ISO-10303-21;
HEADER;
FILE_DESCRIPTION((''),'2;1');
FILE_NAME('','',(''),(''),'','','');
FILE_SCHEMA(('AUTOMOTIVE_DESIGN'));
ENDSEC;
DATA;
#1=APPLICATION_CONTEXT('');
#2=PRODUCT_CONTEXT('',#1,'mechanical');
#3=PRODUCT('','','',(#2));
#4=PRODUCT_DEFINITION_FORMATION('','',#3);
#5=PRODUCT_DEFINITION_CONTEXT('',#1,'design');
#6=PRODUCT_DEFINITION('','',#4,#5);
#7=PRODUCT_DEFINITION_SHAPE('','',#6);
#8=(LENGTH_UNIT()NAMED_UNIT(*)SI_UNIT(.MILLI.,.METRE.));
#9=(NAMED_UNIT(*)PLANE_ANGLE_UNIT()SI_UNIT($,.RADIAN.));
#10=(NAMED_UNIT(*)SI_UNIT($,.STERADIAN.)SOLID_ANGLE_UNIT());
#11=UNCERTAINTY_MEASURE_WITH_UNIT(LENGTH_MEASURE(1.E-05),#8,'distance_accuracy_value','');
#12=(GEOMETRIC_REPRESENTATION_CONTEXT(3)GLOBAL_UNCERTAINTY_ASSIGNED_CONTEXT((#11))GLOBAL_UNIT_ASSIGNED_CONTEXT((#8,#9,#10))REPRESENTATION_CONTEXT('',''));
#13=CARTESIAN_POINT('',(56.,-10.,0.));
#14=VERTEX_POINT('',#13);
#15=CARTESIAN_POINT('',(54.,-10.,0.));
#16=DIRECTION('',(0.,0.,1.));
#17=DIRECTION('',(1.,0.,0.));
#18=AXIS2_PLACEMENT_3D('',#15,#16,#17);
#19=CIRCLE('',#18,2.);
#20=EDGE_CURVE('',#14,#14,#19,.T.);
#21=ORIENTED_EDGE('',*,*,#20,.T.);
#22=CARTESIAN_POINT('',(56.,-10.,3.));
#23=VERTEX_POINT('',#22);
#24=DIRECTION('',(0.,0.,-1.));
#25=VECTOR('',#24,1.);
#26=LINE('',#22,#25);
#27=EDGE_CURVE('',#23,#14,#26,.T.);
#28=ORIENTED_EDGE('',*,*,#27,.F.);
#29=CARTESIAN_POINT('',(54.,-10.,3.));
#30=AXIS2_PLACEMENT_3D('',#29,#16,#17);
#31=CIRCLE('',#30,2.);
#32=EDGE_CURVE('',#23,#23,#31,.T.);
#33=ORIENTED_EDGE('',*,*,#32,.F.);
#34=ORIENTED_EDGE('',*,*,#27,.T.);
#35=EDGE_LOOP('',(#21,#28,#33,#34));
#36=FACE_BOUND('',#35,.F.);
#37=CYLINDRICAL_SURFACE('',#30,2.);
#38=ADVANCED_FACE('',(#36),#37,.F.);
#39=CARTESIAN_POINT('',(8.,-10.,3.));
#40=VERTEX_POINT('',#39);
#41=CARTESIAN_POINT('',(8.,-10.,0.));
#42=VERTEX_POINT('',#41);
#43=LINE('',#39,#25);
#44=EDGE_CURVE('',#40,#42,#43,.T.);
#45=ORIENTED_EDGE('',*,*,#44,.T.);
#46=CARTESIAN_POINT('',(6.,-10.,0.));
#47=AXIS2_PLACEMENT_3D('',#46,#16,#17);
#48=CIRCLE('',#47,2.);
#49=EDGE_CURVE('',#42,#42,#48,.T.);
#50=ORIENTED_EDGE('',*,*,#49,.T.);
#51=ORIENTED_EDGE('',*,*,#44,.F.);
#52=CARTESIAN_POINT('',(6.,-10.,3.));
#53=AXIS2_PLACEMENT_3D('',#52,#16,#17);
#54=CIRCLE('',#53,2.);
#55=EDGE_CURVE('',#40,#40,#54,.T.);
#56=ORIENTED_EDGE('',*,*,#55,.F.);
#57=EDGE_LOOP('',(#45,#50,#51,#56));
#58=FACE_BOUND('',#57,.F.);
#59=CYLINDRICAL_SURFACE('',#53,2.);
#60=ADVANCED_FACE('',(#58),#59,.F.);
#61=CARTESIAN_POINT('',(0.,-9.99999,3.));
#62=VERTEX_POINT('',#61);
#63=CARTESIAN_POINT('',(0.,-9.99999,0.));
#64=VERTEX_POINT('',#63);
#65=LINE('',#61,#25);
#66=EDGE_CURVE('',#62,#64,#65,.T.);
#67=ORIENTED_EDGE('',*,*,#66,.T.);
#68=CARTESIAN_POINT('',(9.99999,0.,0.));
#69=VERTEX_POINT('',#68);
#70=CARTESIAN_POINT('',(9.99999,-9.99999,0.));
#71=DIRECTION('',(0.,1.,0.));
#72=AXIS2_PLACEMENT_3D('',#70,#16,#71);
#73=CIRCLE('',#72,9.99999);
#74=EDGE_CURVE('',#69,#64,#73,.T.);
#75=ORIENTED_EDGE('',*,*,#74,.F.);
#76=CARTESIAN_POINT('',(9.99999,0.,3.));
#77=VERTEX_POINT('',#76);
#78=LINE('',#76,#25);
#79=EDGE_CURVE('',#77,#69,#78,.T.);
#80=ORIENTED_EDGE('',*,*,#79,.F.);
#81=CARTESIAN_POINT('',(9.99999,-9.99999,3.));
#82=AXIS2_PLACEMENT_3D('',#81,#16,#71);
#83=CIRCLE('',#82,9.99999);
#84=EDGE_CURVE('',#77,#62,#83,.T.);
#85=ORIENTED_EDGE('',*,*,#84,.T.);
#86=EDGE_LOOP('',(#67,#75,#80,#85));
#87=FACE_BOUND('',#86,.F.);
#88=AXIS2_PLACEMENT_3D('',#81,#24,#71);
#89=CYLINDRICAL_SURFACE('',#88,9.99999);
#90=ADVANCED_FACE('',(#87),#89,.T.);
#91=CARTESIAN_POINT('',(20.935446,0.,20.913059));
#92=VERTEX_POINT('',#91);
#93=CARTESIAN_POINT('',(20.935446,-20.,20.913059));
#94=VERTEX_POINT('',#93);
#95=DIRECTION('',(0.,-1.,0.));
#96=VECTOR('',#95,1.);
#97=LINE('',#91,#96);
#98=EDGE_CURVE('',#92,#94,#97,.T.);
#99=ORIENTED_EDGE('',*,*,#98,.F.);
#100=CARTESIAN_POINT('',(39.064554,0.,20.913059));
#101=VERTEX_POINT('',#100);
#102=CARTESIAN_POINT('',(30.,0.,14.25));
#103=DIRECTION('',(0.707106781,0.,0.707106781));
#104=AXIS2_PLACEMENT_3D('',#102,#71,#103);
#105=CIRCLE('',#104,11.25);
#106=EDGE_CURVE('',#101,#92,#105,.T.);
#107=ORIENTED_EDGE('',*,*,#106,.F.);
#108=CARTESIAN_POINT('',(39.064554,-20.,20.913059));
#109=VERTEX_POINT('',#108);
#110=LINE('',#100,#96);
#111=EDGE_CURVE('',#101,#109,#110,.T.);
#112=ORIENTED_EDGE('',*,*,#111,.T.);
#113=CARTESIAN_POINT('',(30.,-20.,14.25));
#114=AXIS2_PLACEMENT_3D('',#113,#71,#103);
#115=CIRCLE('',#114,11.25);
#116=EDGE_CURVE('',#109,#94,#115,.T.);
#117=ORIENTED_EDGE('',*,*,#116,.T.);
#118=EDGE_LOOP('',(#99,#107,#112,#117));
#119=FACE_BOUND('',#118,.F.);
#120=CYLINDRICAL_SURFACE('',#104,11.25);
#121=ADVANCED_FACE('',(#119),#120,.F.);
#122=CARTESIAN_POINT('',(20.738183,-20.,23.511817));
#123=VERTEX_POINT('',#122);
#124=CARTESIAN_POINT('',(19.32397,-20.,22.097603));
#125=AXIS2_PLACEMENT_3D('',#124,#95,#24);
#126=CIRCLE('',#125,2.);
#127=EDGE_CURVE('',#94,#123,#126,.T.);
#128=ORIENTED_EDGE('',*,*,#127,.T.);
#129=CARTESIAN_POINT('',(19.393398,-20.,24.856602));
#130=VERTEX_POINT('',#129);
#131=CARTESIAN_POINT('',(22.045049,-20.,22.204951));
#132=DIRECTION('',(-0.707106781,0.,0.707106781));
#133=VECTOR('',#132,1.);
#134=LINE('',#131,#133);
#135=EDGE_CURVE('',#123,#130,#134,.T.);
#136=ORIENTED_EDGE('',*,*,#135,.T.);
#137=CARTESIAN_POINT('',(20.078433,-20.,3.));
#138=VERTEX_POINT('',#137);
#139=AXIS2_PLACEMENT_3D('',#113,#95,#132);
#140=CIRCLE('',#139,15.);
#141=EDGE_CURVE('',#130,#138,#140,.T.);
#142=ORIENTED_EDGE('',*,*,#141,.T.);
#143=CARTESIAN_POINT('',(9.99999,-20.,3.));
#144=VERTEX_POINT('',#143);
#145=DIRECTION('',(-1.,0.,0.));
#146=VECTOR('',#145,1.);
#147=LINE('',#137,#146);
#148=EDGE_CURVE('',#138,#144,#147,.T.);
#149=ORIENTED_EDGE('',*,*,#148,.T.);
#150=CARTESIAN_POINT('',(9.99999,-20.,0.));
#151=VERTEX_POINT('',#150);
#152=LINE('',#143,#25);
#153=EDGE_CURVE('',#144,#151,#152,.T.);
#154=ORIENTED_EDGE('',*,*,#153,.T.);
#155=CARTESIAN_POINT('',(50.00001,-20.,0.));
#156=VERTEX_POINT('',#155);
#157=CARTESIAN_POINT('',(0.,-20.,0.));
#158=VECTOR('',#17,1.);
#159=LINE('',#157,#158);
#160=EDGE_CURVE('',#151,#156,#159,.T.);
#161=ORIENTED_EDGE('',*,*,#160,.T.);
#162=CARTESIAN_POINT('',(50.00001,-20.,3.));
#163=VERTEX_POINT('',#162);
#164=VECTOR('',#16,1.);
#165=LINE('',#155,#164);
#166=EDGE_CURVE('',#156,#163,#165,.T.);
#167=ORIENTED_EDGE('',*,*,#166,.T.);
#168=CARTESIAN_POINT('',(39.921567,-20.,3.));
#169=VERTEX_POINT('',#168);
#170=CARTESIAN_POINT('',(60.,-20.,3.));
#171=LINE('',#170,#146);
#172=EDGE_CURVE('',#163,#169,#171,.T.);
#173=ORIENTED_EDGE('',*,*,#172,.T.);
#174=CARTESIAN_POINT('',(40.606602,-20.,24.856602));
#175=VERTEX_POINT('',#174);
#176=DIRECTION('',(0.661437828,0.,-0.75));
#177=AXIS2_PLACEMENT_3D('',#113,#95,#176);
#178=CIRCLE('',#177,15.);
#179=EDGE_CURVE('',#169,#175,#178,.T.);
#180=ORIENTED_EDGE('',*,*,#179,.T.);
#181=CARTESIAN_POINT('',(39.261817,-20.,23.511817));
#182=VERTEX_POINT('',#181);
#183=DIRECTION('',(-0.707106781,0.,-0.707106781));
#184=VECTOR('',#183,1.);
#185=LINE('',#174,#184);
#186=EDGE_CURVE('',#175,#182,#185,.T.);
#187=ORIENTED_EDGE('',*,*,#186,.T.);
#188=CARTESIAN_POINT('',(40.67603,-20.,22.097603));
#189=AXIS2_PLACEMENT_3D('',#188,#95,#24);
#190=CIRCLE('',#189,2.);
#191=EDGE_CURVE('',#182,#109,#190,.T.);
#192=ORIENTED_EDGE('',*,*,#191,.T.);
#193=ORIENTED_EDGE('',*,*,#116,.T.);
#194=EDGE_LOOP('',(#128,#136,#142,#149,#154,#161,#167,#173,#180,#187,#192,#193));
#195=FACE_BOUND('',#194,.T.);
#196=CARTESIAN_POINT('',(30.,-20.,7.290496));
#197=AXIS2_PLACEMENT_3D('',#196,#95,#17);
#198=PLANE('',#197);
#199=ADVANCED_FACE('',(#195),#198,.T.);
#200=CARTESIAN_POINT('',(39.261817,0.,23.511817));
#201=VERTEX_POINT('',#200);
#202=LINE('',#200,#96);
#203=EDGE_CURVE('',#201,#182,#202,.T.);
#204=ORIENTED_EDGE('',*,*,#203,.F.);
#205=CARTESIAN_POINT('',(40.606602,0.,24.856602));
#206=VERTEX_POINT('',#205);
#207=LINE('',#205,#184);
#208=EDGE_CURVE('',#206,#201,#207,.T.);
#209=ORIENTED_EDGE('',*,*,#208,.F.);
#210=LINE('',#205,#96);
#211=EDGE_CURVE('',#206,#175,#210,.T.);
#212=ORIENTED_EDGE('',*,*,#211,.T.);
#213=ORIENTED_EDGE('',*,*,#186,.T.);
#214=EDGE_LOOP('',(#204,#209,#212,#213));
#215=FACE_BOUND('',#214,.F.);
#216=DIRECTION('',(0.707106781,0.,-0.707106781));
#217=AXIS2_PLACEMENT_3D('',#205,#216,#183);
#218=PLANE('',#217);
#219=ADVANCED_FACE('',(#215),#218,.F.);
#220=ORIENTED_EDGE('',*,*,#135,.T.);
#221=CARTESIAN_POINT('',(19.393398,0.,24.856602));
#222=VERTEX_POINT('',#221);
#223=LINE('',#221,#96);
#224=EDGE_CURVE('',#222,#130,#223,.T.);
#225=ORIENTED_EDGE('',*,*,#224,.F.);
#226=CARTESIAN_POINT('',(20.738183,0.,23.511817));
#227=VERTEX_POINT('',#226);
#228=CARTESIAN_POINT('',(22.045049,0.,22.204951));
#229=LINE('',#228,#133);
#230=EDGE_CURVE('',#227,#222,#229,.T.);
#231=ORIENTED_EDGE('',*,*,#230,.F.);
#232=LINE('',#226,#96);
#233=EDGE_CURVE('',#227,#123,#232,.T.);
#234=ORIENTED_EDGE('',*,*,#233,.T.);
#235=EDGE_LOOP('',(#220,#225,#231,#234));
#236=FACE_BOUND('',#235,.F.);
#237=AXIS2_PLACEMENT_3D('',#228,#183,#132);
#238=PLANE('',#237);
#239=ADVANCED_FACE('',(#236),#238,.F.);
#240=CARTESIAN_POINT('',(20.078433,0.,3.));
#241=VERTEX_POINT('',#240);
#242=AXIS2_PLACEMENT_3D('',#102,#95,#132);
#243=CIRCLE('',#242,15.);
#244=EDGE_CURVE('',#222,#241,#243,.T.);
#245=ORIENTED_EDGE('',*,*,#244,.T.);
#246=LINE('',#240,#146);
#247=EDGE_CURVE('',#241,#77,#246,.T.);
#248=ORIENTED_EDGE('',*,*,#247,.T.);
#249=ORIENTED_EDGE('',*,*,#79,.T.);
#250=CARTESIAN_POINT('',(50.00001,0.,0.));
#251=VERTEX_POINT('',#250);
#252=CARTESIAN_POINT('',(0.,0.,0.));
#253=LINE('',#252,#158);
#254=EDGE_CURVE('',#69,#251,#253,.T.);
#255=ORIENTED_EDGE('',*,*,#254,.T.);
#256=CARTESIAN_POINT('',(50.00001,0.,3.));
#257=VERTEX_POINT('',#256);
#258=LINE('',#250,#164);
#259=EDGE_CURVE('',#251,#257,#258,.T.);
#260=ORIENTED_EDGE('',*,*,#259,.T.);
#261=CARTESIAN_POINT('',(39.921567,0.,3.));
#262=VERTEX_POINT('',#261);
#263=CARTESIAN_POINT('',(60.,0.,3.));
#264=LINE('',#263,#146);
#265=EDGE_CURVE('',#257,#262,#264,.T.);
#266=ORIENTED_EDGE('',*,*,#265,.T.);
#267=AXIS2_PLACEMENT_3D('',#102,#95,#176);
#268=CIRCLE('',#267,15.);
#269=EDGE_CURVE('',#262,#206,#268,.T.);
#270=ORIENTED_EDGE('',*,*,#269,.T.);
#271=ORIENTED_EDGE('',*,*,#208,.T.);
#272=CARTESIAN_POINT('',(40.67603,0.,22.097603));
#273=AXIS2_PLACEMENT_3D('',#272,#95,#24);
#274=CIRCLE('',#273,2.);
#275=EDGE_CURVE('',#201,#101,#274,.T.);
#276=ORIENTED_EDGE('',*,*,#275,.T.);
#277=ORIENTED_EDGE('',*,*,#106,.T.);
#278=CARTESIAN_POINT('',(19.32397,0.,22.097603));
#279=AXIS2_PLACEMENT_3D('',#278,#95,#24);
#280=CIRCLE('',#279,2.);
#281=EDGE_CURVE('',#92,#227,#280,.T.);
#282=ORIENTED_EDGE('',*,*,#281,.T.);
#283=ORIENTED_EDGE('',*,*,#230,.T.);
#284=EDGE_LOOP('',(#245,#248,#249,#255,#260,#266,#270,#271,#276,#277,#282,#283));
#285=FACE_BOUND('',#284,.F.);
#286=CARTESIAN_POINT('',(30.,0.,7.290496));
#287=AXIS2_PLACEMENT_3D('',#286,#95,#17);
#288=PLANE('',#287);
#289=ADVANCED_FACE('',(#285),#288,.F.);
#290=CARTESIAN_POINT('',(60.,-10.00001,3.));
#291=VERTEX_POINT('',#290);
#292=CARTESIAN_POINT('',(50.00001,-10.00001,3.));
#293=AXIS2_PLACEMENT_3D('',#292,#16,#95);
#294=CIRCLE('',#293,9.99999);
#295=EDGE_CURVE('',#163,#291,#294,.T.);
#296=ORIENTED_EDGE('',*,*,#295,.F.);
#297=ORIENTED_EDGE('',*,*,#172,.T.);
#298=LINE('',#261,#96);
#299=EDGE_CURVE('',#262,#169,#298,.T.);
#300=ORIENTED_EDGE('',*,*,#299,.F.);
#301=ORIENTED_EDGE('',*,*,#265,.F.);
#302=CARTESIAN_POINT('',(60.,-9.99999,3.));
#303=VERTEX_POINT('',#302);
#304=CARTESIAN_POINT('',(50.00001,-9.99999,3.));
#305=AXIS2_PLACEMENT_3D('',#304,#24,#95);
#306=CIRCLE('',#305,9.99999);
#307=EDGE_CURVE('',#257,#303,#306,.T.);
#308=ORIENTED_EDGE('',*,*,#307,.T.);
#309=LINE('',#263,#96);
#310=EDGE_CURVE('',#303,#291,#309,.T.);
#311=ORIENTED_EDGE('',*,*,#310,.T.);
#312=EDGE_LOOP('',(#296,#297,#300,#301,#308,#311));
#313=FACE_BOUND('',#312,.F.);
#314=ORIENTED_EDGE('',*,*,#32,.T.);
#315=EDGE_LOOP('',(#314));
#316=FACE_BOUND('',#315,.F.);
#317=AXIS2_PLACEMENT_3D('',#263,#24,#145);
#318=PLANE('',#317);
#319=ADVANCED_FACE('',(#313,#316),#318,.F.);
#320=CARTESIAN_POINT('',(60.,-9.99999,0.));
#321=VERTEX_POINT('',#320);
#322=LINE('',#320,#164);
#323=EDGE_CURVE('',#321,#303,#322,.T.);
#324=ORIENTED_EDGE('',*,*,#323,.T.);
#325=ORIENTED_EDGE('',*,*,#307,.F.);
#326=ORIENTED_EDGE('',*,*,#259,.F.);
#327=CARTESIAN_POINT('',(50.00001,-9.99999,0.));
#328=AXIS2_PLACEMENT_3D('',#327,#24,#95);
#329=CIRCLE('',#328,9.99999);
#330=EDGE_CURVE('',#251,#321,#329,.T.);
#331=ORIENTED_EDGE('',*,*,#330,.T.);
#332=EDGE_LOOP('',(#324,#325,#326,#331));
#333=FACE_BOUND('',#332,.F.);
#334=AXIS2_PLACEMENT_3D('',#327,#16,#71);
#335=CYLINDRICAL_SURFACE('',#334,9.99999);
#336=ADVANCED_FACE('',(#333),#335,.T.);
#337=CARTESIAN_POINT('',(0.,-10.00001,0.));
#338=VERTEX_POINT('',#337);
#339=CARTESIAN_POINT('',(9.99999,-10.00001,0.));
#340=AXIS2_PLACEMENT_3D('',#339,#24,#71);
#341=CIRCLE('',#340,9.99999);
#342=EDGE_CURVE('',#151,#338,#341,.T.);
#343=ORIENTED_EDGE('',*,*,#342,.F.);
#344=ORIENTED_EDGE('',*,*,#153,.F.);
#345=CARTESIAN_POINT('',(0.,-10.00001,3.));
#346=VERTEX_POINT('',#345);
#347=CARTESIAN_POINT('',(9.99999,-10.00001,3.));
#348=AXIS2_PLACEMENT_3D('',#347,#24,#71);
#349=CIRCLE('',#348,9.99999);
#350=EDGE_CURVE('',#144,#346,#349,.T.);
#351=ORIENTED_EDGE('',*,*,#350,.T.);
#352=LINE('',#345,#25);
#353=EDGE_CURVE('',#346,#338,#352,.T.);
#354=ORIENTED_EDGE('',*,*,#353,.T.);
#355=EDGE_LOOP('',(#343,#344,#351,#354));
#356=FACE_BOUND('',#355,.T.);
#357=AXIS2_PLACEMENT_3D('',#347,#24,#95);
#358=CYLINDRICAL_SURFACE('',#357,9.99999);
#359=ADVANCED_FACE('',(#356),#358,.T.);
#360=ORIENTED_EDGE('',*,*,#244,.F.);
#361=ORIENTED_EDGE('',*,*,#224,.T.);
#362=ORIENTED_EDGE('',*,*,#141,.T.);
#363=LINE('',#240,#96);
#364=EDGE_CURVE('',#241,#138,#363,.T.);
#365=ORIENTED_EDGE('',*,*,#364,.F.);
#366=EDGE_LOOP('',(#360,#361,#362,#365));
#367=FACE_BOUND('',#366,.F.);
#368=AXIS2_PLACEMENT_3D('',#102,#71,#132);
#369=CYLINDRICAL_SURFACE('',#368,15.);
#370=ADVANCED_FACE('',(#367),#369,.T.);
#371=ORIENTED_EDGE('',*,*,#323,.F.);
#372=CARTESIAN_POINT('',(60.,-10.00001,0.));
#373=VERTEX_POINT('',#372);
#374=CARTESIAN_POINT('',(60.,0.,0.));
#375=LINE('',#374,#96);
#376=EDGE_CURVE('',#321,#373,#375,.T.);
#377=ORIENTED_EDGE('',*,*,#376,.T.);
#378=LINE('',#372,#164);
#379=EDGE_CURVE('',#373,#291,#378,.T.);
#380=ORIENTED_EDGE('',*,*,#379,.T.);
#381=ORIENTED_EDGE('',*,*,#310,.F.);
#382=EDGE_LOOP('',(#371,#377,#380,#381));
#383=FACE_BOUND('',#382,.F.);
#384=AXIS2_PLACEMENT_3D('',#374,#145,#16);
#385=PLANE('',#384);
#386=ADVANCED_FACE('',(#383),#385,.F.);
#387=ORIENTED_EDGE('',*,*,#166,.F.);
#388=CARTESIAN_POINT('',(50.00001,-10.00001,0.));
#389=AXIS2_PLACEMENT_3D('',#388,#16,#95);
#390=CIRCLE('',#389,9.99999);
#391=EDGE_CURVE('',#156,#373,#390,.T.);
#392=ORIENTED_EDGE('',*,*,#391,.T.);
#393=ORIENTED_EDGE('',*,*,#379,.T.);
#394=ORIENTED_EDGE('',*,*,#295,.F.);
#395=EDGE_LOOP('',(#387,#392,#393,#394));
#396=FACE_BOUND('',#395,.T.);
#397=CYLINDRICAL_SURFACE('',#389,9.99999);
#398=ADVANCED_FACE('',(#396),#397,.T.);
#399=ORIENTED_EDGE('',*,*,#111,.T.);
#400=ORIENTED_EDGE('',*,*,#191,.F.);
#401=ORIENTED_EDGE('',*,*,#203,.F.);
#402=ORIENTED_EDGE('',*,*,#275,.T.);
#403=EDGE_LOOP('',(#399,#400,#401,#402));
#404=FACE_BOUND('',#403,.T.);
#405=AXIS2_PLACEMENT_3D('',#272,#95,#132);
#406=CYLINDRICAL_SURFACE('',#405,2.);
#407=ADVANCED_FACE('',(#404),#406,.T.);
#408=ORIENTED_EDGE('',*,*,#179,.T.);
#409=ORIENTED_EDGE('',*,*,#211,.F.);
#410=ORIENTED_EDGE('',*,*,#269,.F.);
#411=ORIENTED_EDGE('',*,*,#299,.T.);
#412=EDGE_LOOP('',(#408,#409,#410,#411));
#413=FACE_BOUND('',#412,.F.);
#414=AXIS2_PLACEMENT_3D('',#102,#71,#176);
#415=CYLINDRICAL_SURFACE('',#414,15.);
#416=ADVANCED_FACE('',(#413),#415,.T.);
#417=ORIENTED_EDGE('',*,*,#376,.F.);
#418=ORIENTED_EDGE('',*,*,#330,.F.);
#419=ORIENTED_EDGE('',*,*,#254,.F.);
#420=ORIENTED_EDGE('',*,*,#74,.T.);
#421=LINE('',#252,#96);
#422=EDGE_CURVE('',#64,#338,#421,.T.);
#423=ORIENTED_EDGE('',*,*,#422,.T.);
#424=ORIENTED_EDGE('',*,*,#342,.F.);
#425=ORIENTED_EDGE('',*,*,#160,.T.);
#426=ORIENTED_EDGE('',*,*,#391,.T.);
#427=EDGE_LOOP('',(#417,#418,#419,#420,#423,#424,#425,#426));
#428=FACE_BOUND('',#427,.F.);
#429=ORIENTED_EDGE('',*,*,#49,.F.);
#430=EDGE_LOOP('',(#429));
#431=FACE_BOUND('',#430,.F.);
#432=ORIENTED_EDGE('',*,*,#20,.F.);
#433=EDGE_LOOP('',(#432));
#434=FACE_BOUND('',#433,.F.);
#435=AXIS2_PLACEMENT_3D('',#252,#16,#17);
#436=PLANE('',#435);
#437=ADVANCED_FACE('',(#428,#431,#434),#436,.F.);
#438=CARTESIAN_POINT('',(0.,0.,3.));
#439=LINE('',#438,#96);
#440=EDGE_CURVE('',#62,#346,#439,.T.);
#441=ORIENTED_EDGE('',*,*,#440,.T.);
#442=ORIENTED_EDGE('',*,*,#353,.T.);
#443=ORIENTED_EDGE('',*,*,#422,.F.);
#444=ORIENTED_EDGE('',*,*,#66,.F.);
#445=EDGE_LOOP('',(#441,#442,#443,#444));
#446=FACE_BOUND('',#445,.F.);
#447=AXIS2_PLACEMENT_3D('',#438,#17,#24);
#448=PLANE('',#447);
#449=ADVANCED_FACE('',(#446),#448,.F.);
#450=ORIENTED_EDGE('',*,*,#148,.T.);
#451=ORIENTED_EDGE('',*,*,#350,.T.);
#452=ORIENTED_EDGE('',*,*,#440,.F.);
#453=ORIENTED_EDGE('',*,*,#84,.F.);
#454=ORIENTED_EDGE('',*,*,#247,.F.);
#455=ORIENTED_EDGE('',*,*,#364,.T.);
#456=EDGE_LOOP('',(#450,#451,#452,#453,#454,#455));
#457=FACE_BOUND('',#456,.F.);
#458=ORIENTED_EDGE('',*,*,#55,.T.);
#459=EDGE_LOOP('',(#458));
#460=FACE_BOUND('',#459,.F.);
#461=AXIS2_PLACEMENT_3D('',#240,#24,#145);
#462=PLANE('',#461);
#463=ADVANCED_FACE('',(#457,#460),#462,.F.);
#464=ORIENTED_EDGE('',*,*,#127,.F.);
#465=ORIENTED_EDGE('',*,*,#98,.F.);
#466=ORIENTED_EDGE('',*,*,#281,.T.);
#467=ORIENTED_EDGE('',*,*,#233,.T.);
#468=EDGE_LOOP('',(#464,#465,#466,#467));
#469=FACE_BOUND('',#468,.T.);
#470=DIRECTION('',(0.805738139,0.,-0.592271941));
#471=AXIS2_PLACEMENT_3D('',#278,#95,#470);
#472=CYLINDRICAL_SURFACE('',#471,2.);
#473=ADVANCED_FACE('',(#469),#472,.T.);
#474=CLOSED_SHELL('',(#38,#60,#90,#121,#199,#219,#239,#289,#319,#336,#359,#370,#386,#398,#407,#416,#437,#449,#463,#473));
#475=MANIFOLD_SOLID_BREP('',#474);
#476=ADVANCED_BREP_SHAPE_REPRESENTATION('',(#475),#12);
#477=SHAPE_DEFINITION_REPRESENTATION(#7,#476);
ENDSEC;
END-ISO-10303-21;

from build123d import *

# Parameters (mm, degrees)
F1_DEPTH = 20
F2_R     = 2
F3_R     = 2
F4_DEPTH = 25
F5_R     = 9.99999


# Not quite as in the source:
# - a fillet or chamfer is up to 0.001 mm smaller than in the source, because OpenCascade refuses the exact size


with BuildPart() as f1:
    # F0 (on Front) → F1 (new body)
    with BuildSketch(Plane.XZ):
        with BuildLine():
            Line((0, 3), (0, 0))
            Line((0, 0), (60, 0))
            Line((60, 0), (60, 3))
            Line((60, 3), (39.9215674165, 3))
            ThreePointArc((39.9215674165, 3), (44.9926379155, 13.7800975251), (40.6066017178, 24.8566017178))
            Line((40.6066017178, 24.8566017178), (37.9549512883, 22.2049512883))
            ThreePointArc((37.9549512883, 22.2049512883), (30, 3), (22.0450487117, 22.2049512883))
            Line((22.0450487117, 22.2049512883), (19.3933982822, 24.8566017178))
            ThreePointArc((19.3933982822, 24.8566017178), (15.0073620845, 13.7800975251), (20.0784325835, 3))
            Line((20.0784325835, 3), (0, 3))
        make_face()
    extrude(amount=F1_DEPTH)

    # F2
    f2_edges = [f1.edges().sort_by_distance(p)[0] for p in [
        (22.045049, -10, 22.204951),
        (37.954951, -10, 22.204951),
    ]]
    fillet(f2_edges, radius=F2_R)

    # F3 (on face) → F4 (cut)
    with BuildSketch(Plane.XY.offset(3)):
        with Locations((6, -10)):
            Circle(F3_R)
        with Locations((54, -10)):
            Circle(F3_R)
    extrude(amount=-F4_DEPTH, mode=Mode.SUBTRACT)

    # F5 (radius 10 in the source; OpenCascade refuses exactly that, so slightly less here)
    f5_edges = [f1.edges().sort_by_distance(p)[0] for p in [
        (0, 0, 1.5),
        (0, -20, 1.5),
        (60, -20, 1.5),
        (60, 0, 1.5),
    ]]
    fillet(f5_edges, radius=F5_R)


solid = f1.part
